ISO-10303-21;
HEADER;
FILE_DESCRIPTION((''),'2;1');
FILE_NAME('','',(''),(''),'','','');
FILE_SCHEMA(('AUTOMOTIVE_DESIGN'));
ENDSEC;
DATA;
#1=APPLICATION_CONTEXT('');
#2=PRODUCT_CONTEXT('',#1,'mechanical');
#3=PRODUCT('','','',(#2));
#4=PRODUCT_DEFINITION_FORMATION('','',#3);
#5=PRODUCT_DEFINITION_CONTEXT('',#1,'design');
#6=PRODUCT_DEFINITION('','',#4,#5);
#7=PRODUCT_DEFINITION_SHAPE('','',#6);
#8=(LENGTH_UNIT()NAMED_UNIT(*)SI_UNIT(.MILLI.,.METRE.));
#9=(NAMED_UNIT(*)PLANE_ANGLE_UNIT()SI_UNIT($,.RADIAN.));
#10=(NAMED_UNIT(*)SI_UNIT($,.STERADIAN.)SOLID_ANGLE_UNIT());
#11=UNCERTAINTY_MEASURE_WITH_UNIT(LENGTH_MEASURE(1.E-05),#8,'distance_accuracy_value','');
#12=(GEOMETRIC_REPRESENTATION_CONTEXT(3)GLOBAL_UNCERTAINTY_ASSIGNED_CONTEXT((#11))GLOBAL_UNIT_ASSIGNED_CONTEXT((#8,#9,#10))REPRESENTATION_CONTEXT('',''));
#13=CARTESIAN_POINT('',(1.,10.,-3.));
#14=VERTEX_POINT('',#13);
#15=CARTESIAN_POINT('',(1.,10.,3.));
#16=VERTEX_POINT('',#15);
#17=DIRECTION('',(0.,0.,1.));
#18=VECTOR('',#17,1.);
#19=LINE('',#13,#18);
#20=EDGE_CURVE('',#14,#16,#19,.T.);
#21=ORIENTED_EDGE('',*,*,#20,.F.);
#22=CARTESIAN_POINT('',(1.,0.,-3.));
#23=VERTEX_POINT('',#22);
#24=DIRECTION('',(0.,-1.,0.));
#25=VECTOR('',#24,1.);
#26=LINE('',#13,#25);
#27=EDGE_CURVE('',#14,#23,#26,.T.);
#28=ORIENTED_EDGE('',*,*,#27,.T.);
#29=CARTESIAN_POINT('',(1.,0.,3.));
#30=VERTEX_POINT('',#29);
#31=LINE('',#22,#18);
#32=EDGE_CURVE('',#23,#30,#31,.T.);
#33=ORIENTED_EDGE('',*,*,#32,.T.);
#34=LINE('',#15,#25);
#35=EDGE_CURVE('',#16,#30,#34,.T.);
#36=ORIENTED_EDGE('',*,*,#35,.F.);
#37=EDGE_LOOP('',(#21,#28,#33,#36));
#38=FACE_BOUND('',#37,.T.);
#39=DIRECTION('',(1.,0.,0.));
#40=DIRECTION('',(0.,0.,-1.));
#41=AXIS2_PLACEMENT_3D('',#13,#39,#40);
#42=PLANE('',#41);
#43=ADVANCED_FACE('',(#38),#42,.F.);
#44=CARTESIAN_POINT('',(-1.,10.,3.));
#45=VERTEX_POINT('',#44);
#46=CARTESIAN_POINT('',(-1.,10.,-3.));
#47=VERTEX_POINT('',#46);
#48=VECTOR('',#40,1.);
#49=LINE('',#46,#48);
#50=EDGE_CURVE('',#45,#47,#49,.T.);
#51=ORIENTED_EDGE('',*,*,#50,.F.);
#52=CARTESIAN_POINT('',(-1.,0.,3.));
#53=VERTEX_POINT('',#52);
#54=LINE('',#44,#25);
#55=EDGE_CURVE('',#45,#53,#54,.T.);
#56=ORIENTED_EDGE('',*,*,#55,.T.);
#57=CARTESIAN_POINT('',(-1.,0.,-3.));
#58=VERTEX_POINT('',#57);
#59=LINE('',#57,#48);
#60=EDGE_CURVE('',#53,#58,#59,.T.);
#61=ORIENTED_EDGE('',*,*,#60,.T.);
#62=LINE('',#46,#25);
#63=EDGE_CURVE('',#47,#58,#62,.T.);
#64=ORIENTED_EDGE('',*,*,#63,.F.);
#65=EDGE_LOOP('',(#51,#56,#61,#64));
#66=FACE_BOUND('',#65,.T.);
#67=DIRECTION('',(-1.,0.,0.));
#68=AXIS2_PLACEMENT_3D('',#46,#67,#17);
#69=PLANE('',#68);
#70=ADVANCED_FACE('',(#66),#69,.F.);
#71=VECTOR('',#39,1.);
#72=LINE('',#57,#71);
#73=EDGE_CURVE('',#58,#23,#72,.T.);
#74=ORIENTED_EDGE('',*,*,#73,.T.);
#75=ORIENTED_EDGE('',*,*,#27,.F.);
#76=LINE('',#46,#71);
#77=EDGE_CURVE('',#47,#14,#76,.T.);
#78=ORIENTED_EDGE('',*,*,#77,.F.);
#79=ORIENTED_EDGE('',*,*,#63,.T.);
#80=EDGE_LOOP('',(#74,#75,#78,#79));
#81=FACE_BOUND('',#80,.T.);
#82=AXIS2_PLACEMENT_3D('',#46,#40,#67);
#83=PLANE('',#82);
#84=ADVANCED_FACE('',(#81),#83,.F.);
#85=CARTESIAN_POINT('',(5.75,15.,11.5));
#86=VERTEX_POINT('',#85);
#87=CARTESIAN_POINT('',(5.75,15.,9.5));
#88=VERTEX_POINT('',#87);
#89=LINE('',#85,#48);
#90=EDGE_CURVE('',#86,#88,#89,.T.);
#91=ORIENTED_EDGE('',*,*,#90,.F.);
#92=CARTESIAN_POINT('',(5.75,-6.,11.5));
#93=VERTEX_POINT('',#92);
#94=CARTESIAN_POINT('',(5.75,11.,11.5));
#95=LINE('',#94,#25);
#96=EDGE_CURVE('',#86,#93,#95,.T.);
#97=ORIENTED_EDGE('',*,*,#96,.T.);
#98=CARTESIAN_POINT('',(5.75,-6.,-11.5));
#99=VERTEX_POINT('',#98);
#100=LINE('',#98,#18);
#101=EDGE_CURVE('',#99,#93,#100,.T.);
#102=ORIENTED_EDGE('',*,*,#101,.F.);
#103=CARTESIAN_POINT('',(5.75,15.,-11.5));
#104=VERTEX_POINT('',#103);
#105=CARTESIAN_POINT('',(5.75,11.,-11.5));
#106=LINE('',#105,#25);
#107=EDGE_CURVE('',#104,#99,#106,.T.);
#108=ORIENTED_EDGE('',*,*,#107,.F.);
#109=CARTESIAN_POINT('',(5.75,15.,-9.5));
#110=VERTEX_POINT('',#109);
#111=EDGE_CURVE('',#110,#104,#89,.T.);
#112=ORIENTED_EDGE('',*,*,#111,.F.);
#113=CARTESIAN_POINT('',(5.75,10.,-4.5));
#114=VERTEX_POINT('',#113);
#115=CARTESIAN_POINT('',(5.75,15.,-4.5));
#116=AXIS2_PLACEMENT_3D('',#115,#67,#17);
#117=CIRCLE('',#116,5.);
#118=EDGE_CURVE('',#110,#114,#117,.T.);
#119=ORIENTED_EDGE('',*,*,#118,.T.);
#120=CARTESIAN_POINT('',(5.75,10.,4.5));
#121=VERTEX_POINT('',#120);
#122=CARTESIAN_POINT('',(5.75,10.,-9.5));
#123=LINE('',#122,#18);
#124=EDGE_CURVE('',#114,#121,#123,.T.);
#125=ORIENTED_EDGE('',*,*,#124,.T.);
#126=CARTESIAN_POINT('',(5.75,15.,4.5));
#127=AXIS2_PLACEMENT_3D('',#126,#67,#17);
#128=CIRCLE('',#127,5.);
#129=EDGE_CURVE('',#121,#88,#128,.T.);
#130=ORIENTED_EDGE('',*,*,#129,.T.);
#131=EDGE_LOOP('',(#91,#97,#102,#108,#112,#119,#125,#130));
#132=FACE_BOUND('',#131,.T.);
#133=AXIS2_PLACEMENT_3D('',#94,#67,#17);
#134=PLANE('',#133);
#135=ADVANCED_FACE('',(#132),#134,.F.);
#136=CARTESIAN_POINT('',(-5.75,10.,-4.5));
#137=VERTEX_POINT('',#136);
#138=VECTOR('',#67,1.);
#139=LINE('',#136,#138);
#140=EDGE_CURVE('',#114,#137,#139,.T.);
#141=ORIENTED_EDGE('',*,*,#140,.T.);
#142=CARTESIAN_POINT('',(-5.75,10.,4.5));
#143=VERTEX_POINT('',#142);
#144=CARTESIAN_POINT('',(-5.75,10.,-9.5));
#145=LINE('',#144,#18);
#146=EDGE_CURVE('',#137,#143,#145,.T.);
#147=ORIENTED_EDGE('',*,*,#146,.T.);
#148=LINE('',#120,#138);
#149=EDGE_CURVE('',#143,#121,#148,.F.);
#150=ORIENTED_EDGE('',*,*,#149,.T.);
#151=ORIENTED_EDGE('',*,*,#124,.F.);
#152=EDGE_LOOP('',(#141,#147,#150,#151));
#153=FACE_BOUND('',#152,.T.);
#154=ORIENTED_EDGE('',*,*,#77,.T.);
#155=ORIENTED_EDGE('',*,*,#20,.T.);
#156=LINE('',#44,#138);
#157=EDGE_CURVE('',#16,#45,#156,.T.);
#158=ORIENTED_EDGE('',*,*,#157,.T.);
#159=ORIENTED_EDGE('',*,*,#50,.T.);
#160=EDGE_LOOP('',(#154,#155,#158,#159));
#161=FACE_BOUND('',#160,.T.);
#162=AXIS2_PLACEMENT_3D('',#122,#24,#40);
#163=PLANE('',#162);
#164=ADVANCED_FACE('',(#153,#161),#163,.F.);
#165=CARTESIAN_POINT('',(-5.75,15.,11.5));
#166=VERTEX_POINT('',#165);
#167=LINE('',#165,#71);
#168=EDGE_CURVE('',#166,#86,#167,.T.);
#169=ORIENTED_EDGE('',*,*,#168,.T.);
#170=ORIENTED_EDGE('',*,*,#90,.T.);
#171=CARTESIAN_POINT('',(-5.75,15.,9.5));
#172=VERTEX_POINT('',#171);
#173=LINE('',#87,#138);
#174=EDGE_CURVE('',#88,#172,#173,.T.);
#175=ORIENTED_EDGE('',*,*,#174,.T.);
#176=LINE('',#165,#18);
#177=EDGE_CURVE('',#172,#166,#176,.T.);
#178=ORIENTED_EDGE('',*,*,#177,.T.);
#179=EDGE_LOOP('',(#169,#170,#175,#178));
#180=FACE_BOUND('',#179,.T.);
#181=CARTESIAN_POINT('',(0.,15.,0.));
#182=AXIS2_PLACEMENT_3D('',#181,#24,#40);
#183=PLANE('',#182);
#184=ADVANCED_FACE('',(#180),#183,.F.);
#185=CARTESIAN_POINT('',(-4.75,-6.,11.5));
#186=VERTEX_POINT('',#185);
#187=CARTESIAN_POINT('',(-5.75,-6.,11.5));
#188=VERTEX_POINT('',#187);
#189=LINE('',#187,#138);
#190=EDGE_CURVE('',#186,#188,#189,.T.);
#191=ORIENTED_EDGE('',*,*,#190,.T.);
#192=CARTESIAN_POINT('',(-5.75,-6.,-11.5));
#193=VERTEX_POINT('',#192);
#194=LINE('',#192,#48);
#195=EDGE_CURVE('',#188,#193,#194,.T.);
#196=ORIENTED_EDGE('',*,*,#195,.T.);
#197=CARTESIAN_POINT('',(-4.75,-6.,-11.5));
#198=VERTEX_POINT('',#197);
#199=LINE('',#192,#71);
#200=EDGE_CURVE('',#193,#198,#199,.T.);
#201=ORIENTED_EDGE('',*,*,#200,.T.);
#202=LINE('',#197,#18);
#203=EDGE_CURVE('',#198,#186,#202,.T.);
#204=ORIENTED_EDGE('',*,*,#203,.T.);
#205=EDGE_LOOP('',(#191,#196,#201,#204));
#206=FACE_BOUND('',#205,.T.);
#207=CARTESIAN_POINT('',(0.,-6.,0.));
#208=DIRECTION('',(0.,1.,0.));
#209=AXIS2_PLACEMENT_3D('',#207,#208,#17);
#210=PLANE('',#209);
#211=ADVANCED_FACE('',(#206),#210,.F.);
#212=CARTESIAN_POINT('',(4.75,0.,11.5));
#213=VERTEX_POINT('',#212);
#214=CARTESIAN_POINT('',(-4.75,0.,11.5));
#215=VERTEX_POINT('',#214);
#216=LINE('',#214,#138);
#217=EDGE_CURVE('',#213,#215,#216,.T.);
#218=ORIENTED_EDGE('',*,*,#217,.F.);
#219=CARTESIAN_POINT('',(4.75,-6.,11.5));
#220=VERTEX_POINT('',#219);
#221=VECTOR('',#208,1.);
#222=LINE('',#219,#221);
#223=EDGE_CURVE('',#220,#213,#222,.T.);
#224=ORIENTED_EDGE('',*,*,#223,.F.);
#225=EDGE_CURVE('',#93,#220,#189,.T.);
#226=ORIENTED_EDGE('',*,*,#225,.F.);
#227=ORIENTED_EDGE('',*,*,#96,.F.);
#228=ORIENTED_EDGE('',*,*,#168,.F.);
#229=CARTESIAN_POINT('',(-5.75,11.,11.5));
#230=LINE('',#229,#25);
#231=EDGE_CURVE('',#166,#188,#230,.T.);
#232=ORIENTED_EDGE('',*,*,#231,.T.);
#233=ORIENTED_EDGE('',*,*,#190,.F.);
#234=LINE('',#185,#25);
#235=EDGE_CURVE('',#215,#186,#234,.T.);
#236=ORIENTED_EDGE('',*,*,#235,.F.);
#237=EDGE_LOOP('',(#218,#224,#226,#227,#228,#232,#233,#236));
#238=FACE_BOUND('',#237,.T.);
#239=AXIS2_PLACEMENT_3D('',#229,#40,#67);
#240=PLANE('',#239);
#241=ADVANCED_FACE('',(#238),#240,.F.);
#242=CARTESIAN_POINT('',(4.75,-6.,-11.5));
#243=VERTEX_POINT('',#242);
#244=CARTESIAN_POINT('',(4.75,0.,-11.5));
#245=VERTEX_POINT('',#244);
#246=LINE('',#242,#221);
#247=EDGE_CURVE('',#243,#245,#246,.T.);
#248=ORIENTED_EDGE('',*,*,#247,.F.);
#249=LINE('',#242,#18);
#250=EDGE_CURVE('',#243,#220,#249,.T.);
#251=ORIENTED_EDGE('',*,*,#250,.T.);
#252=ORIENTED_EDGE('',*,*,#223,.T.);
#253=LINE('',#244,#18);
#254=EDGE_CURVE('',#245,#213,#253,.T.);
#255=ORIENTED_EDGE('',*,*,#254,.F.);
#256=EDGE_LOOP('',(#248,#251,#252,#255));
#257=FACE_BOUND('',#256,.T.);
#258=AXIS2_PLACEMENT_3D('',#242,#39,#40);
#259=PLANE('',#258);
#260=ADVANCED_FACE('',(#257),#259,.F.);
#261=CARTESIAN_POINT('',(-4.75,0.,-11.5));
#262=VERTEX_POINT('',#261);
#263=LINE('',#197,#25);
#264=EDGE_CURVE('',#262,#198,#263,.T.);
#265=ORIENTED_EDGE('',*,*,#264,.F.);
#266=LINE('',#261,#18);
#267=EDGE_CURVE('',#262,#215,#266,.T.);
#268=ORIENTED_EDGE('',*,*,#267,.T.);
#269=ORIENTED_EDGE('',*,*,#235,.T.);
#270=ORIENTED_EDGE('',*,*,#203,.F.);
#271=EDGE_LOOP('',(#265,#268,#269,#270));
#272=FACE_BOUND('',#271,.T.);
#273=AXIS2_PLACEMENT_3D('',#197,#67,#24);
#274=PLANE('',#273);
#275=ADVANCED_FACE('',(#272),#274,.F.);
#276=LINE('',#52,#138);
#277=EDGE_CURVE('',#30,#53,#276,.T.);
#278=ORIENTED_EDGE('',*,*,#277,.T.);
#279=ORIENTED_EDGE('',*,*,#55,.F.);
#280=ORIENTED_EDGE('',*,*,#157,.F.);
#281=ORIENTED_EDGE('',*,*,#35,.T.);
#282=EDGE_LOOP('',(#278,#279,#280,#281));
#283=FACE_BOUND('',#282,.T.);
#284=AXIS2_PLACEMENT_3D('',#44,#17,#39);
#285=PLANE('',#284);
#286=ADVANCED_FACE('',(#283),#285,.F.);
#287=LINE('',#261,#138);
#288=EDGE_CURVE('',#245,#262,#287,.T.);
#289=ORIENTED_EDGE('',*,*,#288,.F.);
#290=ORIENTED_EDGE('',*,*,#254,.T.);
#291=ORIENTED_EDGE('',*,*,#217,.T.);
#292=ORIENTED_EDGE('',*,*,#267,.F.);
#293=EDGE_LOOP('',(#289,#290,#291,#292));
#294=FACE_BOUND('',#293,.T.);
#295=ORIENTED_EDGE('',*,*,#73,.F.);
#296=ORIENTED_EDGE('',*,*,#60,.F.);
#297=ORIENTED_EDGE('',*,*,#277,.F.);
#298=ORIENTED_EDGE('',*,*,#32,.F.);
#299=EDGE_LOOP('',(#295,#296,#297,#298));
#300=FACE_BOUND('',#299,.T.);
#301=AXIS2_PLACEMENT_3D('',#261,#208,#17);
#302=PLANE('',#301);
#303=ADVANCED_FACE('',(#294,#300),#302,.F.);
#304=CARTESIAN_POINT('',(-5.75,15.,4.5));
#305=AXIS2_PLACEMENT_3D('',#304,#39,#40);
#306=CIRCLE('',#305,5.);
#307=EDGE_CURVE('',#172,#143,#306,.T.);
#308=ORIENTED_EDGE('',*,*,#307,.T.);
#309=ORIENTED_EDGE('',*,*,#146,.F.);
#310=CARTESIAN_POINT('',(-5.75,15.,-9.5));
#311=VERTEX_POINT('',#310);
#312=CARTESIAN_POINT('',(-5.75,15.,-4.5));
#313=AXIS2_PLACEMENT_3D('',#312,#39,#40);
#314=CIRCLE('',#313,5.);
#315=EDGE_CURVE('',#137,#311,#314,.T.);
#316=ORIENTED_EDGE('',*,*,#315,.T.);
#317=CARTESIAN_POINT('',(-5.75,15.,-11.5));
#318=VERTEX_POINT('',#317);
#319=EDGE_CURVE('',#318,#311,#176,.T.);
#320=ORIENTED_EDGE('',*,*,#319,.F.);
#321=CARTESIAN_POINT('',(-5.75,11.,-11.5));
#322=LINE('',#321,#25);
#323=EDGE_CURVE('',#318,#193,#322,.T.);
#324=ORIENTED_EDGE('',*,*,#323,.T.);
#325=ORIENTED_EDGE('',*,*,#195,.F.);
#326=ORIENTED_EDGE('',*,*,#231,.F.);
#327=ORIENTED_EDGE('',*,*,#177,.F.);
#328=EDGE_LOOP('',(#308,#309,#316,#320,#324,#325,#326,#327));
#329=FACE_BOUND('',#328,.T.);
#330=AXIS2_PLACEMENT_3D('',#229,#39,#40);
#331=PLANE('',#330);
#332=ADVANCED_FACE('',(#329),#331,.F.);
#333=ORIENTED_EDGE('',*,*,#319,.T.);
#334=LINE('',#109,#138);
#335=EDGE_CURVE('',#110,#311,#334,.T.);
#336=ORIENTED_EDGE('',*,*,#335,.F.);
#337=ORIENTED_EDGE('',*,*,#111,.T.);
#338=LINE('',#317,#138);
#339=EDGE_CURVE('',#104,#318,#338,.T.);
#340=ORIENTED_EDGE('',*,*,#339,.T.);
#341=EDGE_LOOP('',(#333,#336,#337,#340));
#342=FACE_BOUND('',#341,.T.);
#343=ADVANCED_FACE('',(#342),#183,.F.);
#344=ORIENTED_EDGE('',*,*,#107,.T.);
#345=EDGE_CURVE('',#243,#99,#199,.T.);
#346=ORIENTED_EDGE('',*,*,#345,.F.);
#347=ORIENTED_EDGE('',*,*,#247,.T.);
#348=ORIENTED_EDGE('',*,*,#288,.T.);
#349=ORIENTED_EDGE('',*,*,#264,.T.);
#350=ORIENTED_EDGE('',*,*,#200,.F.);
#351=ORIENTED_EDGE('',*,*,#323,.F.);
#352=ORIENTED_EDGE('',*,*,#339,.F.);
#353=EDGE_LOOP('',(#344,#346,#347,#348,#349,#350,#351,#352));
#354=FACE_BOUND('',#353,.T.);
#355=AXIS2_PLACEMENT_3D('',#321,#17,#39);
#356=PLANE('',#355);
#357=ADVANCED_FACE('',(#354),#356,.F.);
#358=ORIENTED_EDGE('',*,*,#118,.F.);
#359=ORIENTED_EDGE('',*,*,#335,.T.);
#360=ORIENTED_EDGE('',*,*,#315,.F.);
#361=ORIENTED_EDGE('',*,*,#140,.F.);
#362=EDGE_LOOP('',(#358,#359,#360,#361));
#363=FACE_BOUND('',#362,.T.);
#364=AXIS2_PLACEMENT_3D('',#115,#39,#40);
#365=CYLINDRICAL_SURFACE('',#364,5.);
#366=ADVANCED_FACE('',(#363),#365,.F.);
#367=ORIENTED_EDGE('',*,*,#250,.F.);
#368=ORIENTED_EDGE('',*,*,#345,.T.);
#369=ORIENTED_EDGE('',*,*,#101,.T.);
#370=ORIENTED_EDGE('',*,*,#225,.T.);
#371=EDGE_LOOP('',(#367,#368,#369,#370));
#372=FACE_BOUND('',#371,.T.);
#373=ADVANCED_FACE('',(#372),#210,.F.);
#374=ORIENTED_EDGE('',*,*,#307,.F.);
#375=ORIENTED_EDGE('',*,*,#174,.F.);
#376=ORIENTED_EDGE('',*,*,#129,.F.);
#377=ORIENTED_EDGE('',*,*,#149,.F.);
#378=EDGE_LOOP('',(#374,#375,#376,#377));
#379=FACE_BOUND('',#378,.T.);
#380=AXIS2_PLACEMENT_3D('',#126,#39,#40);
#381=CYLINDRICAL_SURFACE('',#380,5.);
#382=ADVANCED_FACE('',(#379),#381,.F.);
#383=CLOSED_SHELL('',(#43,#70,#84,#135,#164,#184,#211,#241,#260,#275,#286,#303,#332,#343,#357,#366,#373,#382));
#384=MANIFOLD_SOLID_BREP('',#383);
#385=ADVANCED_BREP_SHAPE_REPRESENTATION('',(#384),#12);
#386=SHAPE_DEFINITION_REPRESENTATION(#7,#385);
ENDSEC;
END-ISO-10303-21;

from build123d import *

# Parameters (mm, degrees)
SKETCH1_W           = 11.5
SKETCH1_H           = 23
BOSS_EXTRUDE1_DEPTH = 11
SKETCH3_W           = 11.5
SKETCH3_H           = 23
BOSS_EXTRUDE3_DEPTH = 6
SKETCH4_W           = 9.5
SKETCH4_H           = 6
CUT_EXTRUDE1_DEPTH  = 27.135464411
SKETCH7_W           = 2
SKETCH7_H           = 6
CUT_EXTRUDE2_DEPTH  = 10
SKETCH8_W           = 11.5
SKETCH8_H           = 23
BOSS_EXTRUDE4_DEPTH = 4
SKETCH9_W           = 19
SKETCH9_H           = 5
CUT_EXTRUDE3_DEPTH  = 23.12464689
FILLET1_R           = 5


with BuildPart() as part:
    # Sketch1 → Boss-Extrude1 (new body)
    with BuildSketch(Plane(origin=(0, 0, 0), x_dir=(1, 0, 0), z_dir=(0, 1, 0))):
        Rectangle(SKETCH1_W, SKETCH1_H)
    extrude(amount=BOSS_EXTRUDE1_DEPTH)

    # Sketch3 → Boss-Extrude3 (add)
    with BuildSketch(Plane.XZ):
        Rectangle(SKETCH3_W, SKETCH3_H)
    extrude(amount=BOSS_EXTRUDE3_DEPTH)

    # Sketch4 → Cut-Extrude1 (cut, through all)
    with BuildSketch(Plane.XY.offset(11.5)):
        with Locations((0, -3)):
            Rectangle(SKETCH4_W, SKETCH4_H)
    extrude(amount=-CUT_EXTRUDE1_DEPTH, mode=Mode.SUBTRACT)

    # Sketch7 → Cut-Extrude2 (cut)
    with BuildSketch(Plane.XZ):
        Rectangle(SKETCH7_W, SKETCH7_H)
    extrude(amount=-CUT_EXTRUDE2_DEPTH, mode=Mode.SUBTRACT)

    # Sketch8 → Boss-Extrude4 (add)
    with BuildSketch(Plane(origin=(0, 11, 0), x_dir=(1, 0, 0), z_dir=(0, 1, 0))):
        Rectangle(SKETCH8_W, SKETCH8_H)
    extrude(amount=BOSS_EXTRUDE4_DEPTH)

    # Sketch9 → Cut-Extrude3 (cut, through all)
    with BuildSketch(Plane.ZY.offset(5.75)):
        with Locations((0, 12.5)):
            Rectangle(SKETCH9_W, SKETCH9_H)
    extrude(amount=-CUT_EXTRUDE3_DEPTH, mode=Mode.SUBTRACT)

    # Fillet1
    fillet1_edges = [part.edges().sort_by_distance(p)[0] for p in [
        (0, 10, -9.5),
        (0, 10, 9.5),
    ]]
    fillet(fillet1_edges, radius=FILLET1_R - 0.0001)  # a hair under: the kernel refuses the full size


solid = part.part
